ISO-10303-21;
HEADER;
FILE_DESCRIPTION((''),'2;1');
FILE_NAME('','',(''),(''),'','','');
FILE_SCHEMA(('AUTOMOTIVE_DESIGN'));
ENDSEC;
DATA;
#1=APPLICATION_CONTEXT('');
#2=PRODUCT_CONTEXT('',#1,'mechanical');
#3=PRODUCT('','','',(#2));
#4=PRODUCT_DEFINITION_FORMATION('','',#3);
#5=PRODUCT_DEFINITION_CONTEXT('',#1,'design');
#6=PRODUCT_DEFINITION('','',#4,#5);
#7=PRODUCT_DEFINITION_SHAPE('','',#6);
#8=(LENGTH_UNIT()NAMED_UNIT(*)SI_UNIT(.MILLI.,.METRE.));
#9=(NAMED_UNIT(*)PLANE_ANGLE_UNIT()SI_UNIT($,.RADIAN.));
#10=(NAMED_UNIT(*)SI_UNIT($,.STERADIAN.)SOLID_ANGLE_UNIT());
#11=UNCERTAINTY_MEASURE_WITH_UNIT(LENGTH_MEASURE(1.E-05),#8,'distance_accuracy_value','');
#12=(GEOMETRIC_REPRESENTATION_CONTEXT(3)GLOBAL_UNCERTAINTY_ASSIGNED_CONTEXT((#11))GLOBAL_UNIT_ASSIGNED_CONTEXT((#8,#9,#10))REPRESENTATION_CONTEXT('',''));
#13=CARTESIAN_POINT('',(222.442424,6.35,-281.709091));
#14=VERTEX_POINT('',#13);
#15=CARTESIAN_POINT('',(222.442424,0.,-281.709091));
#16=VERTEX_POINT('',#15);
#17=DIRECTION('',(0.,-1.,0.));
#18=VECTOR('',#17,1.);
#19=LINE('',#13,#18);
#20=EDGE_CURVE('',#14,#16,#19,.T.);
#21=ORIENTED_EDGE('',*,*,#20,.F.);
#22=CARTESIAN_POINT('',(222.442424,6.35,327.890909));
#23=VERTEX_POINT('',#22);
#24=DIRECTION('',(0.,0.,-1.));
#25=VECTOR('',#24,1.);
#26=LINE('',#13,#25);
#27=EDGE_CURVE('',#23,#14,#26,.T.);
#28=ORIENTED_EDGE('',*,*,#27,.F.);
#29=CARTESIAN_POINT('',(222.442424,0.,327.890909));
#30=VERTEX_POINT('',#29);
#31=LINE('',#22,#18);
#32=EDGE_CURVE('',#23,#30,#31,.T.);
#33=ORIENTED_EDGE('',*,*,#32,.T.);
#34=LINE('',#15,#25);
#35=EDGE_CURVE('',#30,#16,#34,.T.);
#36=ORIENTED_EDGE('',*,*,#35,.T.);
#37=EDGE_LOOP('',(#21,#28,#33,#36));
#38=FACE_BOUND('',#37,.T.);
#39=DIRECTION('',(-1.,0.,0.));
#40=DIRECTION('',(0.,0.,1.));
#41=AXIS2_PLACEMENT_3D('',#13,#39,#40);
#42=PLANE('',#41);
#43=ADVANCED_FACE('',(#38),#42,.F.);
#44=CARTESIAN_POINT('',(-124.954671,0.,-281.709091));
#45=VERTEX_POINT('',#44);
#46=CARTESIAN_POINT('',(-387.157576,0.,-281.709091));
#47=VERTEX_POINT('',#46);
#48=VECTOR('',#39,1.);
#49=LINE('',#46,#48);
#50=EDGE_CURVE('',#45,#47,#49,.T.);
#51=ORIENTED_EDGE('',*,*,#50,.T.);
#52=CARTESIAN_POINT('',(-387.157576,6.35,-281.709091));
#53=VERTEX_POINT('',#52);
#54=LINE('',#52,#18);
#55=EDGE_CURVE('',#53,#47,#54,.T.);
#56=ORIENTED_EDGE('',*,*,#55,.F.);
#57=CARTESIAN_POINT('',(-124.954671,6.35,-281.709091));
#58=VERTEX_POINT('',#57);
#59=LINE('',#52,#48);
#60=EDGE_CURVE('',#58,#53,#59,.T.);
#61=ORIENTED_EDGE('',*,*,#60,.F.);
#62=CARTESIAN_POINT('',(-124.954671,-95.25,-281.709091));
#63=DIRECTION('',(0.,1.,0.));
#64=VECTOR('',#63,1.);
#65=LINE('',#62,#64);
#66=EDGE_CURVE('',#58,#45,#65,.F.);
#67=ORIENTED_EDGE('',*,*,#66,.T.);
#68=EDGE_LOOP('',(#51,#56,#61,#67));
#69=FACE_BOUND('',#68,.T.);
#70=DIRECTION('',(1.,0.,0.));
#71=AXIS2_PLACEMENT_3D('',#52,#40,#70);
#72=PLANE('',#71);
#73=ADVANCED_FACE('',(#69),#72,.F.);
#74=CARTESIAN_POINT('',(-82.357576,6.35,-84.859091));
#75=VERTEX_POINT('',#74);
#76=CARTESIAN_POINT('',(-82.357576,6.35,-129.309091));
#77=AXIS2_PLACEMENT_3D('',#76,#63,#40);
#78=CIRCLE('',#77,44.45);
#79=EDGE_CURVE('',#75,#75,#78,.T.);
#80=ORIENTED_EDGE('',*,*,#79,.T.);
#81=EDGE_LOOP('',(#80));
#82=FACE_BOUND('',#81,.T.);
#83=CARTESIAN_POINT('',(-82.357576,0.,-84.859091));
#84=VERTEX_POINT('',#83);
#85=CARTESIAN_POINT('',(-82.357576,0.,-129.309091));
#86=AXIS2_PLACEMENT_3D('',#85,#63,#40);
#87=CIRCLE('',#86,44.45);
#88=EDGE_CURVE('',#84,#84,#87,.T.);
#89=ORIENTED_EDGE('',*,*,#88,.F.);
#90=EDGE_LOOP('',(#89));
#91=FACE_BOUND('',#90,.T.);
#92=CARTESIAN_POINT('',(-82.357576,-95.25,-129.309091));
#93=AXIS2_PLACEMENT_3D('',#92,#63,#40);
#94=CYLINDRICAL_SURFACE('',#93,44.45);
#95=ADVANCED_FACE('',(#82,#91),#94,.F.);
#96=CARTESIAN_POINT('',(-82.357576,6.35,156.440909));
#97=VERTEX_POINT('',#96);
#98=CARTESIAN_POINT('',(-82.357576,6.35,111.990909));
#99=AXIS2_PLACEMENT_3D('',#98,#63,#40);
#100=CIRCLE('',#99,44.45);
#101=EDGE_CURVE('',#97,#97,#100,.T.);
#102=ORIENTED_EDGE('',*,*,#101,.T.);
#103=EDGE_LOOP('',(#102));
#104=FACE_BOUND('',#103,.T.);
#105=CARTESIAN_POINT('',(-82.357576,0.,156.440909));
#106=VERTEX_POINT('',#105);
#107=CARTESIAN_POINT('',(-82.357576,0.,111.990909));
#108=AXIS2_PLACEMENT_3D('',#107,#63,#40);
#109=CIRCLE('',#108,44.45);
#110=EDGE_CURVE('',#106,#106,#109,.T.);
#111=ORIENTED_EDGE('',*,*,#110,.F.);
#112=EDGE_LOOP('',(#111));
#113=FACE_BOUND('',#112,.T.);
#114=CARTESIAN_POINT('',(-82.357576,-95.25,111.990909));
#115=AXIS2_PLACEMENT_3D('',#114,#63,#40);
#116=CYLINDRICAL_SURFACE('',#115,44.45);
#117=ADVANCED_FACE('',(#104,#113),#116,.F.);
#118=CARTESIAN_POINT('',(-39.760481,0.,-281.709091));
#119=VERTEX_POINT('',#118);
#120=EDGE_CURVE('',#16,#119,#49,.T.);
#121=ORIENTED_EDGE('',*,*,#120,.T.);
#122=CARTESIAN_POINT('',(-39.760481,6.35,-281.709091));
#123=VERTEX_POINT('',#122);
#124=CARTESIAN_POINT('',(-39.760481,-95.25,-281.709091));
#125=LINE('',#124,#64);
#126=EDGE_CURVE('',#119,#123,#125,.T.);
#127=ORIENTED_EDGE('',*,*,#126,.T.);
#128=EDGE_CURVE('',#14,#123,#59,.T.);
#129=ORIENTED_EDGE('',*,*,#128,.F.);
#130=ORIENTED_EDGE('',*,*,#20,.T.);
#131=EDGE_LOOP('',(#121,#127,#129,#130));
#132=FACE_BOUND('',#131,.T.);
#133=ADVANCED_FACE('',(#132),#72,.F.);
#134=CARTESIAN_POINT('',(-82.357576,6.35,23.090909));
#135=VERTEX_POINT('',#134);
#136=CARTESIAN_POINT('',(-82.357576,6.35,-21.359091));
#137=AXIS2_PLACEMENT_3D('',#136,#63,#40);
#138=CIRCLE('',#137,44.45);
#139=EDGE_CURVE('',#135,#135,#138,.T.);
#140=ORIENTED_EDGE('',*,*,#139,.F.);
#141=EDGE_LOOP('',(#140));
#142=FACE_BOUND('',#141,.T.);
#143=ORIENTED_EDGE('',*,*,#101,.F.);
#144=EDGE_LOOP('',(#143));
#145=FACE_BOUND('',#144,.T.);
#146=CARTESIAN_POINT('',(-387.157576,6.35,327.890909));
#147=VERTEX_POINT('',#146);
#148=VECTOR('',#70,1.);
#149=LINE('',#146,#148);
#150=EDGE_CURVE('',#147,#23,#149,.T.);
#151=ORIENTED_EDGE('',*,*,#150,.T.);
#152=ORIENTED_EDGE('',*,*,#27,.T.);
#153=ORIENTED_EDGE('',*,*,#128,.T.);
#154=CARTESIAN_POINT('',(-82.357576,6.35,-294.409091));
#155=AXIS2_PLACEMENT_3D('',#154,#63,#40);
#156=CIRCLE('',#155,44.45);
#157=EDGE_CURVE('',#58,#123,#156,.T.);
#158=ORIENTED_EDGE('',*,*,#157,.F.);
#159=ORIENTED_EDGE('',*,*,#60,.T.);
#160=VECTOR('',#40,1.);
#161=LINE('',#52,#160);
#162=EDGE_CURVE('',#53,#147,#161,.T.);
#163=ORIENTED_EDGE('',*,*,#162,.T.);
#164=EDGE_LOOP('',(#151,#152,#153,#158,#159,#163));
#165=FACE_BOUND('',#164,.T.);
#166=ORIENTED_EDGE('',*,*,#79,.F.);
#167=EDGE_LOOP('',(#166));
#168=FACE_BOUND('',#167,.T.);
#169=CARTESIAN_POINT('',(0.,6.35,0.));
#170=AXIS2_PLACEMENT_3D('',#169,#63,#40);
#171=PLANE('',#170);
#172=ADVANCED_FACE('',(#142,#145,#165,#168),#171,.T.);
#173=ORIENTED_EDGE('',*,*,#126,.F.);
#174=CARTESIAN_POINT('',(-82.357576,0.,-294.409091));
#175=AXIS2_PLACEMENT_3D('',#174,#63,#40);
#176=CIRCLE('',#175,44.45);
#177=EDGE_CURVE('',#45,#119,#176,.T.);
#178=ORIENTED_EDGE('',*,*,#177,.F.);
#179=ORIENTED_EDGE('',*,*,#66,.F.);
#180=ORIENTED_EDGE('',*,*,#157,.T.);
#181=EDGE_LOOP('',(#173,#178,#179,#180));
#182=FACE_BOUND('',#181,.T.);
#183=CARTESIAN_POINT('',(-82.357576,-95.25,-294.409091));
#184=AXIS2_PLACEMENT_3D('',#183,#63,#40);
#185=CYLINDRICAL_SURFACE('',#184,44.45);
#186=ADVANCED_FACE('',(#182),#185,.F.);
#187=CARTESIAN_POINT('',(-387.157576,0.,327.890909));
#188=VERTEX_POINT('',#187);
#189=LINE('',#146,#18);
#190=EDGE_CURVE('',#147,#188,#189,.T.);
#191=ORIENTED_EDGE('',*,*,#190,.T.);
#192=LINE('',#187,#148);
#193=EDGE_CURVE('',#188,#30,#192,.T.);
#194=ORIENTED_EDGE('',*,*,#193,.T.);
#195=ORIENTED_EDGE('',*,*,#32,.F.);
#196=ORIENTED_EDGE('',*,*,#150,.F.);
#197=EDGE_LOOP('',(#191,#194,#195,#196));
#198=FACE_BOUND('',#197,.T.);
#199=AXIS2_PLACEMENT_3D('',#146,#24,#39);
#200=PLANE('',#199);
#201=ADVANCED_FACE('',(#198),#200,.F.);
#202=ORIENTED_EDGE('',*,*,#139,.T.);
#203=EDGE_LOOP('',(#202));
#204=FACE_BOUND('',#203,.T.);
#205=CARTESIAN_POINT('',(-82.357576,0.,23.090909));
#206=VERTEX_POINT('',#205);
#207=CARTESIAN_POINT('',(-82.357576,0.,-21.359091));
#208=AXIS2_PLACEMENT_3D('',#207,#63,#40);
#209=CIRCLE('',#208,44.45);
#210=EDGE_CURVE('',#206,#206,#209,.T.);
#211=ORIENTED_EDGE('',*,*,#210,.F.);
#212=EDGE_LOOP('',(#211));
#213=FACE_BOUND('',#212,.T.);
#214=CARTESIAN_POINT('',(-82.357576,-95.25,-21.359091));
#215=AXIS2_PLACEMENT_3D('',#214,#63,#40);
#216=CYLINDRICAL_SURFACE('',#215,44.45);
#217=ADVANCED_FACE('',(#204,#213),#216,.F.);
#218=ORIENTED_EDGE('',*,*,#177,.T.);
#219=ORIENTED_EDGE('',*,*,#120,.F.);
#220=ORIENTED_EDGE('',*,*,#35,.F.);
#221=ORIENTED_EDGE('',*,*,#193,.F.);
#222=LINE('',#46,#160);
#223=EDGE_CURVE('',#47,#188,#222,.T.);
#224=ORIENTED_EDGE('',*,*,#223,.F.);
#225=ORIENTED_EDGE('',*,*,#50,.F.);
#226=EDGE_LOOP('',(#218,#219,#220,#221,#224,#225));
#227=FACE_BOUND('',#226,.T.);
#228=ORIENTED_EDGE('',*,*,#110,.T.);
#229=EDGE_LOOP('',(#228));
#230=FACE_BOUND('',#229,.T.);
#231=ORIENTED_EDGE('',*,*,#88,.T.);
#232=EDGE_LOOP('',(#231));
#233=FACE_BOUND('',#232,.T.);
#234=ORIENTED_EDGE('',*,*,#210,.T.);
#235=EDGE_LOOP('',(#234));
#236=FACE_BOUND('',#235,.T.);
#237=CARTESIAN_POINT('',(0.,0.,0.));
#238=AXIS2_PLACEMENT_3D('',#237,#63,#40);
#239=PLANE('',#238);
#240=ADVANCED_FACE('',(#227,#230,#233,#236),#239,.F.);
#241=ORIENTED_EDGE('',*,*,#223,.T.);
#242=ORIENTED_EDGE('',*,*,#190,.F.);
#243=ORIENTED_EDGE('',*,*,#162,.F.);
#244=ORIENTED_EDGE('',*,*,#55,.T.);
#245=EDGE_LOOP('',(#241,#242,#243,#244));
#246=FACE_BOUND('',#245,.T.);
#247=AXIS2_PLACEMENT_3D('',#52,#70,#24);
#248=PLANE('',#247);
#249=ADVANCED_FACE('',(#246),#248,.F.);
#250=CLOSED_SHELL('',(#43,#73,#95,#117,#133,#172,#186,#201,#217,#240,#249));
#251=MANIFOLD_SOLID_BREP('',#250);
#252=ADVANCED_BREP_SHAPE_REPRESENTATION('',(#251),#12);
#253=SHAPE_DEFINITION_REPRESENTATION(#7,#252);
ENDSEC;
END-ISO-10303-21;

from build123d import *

# Parameters (mm, degrees)
SKETCH1_W              = 609.6
SKETCH1_H              = 609.6
BOSS_EXTRUDE1_DEPTH    = 6.35
CUT_EXTRUDE1_START     = -6.35
CUT_EXTRUDE1_OUTLINE_R = 44.45
CUT_EXTRUDE1_DEPTH     = 6.35


# Read off the part's stored shape, not the designer's step: Cut-Extrude1
with BuildPart() as part:
    # Sketch1 → Boss-Extrude1 (new body)
    with BuildSketch(Plane(origin=(0, 0, 0), x_dir=(1, 0, 0), z_dir=(0, 1, 0))):
        with Locations((-82.357575758, -23.090909091)):
            Rectangle(SKETCH1_W, SKETCH1_H)
    extrude(amount=BOSS_EXTRUDE1_DEPTH)

    # Cut-Extrude1 outline → Cut-Extrude1 (cut)
    with BuildSketch(Plane(origin=(0, 6.35, 0), x_dir=(1, 0, 0), z_dir=(0, 1, 0)).offset(CUT_EXTRUDE1_START)):
        with Locations((-82.357575758, 129.309090909)):
            Circle(CUT_EXTRUDE1_OUTLINE_R)
        with Locations((-82.357575758, 21.359090909)):
            Circle(CUT_EXTRUDE1_OUTLINE_R)
        with Locations((-82.357575758, -111.990909091)):
            Circle(CUT_EXTRUDE1_OUTLINE_R)
        with BuildLine():
            Line((-39.760480786, 281.709090909), (-124.954670729, 281.709090909))
            ThreePointArc((-124.954670729, 281.709090909), (-82.357575758, 249.959090909), (-39.760480786, 281.709090909))
        make_face()
    extrude(amount=CUT_EXTRUDE1_DEPTH, mode=Mode.SUBTRACT)


solid = part.part
